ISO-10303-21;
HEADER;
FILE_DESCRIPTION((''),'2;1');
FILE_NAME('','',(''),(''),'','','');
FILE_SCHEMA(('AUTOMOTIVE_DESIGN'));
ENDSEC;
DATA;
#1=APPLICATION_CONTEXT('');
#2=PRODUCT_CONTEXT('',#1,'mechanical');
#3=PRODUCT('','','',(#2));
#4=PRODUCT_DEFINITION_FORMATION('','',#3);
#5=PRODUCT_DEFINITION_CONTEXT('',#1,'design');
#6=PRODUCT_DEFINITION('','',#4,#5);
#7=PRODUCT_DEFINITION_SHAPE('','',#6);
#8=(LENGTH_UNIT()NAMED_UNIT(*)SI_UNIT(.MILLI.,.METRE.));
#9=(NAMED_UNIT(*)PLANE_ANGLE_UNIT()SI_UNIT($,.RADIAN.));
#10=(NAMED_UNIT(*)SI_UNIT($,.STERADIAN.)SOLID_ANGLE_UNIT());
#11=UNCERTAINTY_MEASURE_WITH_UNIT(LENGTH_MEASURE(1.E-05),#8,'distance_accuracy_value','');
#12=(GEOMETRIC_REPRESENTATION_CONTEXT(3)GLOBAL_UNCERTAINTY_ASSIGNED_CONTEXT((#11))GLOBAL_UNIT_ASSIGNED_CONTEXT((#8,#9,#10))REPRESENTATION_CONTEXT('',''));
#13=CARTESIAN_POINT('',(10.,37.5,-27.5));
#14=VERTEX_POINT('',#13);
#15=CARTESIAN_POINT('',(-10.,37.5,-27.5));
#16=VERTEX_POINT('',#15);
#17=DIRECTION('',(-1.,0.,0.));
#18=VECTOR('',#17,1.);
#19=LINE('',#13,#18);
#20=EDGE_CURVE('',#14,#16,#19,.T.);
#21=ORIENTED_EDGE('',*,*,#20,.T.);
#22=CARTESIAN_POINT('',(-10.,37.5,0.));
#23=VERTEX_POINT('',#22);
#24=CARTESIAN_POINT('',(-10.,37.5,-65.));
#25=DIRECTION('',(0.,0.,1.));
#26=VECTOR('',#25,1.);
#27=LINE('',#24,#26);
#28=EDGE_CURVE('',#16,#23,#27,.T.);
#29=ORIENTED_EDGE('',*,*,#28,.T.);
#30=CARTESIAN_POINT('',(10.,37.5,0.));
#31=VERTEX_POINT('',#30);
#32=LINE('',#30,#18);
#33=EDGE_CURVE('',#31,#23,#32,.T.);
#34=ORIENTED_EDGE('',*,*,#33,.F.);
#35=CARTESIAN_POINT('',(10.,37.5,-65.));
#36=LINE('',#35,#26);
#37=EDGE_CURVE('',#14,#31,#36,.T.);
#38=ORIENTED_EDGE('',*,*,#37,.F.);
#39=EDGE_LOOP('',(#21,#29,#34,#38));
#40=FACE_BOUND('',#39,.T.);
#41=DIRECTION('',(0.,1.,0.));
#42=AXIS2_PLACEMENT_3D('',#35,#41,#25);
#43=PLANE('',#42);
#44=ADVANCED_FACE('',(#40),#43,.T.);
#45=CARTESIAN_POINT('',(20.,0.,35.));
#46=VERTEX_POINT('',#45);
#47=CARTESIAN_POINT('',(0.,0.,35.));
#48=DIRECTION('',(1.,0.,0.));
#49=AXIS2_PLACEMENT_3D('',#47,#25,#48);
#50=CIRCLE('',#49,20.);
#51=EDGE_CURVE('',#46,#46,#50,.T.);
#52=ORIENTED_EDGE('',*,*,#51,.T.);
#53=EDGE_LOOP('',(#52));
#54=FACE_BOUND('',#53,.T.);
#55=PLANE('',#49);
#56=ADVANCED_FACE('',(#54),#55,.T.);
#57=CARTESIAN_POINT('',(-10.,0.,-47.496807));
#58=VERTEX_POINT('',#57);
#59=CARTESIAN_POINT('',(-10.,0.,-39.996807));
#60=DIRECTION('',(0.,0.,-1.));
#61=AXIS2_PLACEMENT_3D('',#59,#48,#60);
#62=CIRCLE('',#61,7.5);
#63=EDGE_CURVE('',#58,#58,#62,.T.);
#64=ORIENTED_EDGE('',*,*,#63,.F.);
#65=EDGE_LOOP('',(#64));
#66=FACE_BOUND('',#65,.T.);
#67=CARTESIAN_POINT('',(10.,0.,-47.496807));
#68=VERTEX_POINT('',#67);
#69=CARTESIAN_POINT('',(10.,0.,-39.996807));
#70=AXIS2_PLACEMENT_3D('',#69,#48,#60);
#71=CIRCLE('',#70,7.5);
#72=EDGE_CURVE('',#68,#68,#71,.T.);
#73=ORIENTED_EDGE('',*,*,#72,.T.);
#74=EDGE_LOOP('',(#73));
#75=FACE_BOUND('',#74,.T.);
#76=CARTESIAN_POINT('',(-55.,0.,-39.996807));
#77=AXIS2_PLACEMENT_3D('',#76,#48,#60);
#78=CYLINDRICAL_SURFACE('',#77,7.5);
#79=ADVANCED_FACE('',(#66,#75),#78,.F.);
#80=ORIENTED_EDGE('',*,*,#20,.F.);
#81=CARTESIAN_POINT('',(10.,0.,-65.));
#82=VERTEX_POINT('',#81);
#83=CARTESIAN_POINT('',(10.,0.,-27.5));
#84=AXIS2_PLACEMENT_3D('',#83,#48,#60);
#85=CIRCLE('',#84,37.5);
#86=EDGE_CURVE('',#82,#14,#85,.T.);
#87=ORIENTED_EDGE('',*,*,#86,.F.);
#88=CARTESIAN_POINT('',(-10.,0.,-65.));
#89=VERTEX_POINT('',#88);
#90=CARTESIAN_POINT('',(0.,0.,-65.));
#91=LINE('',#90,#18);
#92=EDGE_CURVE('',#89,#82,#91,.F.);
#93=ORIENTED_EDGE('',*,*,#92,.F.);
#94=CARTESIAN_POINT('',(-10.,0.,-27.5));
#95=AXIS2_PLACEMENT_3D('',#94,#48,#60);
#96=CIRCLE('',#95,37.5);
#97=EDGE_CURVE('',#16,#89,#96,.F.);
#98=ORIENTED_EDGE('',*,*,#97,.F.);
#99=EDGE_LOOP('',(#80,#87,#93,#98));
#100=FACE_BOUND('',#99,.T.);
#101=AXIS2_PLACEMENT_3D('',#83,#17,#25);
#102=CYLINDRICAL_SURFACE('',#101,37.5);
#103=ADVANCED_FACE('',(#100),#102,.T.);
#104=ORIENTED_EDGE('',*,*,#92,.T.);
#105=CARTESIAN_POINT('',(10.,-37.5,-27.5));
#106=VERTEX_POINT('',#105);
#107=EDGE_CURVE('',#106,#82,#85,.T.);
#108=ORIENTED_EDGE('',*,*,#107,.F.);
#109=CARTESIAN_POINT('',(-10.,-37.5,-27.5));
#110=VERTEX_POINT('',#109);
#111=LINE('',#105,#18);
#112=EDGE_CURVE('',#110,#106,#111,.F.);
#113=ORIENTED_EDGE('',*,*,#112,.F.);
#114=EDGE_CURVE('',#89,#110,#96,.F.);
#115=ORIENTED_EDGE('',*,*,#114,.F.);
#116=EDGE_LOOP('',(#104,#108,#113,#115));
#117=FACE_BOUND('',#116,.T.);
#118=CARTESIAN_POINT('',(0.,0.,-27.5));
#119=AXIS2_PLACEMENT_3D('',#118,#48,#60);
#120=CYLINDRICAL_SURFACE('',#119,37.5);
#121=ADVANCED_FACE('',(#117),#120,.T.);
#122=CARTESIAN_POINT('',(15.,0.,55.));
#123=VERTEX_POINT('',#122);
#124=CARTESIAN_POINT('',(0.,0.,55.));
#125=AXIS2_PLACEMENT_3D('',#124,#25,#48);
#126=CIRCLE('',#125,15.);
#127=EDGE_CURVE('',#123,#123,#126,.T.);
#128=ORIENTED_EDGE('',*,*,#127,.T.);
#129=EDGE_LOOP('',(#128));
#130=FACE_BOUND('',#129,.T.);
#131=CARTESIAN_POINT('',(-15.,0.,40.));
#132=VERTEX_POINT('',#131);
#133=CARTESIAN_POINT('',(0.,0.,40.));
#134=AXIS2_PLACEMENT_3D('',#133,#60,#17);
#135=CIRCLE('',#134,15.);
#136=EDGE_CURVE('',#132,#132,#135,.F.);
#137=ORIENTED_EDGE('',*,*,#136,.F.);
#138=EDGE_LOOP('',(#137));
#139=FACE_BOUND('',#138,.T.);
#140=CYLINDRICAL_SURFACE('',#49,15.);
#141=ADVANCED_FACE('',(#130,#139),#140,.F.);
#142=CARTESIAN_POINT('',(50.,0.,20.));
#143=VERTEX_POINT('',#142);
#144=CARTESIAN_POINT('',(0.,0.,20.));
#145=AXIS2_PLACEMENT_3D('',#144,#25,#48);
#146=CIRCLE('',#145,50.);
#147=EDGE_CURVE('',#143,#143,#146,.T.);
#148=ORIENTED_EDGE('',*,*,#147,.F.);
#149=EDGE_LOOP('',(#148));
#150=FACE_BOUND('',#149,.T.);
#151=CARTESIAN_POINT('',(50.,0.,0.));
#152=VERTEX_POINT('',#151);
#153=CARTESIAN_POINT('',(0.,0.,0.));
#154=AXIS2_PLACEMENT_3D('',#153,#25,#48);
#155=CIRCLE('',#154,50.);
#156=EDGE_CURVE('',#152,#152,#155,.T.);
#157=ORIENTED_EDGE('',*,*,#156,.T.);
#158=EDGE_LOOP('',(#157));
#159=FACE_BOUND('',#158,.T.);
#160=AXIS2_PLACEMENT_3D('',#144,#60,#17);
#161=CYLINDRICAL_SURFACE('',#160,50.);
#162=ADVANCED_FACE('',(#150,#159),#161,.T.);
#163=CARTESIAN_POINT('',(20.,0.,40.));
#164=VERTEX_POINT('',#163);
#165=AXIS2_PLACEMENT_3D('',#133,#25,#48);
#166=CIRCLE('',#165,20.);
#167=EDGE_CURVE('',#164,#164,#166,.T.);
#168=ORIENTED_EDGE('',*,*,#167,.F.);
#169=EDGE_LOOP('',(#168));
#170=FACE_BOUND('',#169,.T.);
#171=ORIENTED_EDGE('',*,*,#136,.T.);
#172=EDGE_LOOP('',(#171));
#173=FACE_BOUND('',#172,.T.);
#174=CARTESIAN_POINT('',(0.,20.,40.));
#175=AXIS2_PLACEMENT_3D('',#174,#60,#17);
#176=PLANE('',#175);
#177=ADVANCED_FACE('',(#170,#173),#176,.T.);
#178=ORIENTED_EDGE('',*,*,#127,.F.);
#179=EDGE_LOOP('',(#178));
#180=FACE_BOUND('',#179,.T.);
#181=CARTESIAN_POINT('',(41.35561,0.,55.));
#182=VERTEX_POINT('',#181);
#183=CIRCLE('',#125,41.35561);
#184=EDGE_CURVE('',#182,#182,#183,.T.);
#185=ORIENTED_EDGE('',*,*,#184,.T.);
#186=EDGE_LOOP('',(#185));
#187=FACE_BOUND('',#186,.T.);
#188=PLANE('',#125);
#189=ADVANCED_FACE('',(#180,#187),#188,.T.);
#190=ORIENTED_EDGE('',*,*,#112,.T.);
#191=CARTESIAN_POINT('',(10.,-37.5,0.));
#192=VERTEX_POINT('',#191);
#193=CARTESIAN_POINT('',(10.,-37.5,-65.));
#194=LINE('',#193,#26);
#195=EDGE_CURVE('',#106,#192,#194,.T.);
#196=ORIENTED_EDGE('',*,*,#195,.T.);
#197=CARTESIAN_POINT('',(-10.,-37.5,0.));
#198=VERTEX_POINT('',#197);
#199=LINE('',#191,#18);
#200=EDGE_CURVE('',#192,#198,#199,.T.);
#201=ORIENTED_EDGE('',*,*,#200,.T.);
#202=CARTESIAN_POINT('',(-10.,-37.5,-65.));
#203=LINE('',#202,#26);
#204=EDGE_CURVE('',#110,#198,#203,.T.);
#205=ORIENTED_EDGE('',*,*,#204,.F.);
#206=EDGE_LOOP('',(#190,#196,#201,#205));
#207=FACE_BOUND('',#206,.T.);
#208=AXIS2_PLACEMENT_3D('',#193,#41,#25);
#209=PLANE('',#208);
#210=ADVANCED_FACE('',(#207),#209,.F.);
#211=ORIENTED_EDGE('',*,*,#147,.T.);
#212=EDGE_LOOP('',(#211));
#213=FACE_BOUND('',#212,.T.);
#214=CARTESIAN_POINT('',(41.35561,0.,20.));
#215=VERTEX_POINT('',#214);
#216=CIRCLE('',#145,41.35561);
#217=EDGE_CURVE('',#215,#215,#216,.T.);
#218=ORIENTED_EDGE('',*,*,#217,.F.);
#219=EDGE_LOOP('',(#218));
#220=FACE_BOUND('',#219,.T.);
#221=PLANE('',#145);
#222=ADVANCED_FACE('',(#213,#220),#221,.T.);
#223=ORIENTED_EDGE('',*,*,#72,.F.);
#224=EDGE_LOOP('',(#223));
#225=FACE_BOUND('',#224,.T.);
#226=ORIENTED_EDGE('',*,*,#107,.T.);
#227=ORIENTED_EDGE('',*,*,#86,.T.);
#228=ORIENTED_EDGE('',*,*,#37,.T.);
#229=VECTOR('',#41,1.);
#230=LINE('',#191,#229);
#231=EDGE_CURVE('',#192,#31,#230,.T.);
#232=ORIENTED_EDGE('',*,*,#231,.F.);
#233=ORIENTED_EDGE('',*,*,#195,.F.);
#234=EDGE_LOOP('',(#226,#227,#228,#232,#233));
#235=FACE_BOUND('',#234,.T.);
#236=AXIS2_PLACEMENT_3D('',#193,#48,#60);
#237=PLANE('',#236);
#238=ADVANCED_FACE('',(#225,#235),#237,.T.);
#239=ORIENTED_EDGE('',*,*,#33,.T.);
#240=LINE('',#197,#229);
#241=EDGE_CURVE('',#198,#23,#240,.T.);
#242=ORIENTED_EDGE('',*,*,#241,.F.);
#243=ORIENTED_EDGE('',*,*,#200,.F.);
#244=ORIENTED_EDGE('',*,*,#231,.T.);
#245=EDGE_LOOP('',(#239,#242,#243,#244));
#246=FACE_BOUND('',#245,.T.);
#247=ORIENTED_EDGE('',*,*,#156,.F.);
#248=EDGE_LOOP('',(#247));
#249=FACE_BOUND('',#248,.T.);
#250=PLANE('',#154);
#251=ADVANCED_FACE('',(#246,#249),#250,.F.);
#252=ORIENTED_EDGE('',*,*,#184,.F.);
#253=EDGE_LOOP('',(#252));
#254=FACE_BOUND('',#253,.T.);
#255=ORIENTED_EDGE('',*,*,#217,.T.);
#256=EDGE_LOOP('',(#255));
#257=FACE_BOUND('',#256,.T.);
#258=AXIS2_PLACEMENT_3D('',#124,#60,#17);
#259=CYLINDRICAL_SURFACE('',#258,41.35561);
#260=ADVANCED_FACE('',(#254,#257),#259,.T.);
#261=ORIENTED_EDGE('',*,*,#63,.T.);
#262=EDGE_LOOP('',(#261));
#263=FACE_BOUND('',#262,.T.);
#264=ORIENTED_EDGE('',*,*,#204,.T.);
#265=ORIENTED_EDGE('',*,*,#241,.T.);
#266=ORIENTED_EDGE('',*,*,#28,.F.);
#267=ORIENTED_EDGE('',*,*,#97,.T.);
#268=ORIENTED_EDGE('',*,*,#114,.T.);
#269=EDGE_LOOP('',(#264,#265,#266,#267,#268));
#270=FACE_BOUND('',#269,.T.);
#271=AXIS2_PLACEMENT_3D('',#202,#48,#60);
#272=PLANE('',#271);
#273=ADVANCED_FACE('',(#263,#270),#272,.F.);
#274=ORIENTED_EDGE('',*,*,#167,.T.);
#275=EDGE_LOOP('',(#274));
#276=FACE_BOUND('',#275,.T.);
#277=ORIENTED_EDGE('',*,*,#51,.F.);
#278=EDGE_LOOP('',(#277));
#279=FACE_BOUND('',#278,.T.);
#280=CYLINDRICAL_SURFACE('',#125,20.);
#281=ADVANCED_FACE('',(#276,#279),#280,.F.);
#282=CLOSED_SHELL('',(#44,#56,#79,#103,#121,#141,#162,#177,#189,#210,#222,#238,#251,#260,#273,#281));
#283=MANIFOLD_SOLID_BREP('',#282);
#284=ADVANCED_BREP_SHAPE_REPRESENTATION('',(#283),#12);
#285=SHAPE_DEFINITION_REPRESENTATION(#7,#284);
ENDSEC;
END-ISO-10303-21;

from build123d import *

# Parameters (mm, degrees)
SKETCH1_R           = 50
BOSS_EXTRUDE1_DEPTH = 20
SKETCH2_W           = 20
SKETCH2_H           = 75
BOSS_EXTRUDE2_DEPTH = 65
SKETCH3_R           = 7.5
CUT_EXTRUDE1_DEPTH  = 65
FILLET1_R           = 37.5
SKETCH4_R           = 41.355609665
BOSS_EXTRUDE3_DEPTH = 35
SKETCH8_R           = 15
CUT_EXTRUDE2_DEPTH  = 20
SKETCH10_W          = 5
SKETCH10_H          = 8.446283525


with BuildPart() as part:
    # Sketch1 → Boss-Extrude1 (new body)
    with BuildSketch(Plane.XY):
        Circle(SKETCH1_R)
    extrude(amount=BOSS_EXTRUDE1_DEPTH)

    # Sketch2 → Boss-Extrude2 (add)
    with BuildSketch(Plane(origin=(0, 0, 0), x_dir=(-1, 0, 0), z_dir=(0, 0, -1))):
        Rectangle(SKETCH2_W, SKETCH2_H)
    extrude(amount=BOSS_EXTRUDE2_DEPTH)

    # Sketch3 → Cut-Extrude1 (cut)
    with BuildSketch(Plane(origin=(10, 0, 0), x_dir=(0, 0, -1), z_dir=(1, 0, 0))):
        with Locations((39.996807152, 0)):
            Circle(SKETCH3_R)
    extrude(amount=-CUT_EXTRUDE1_DEPTH, mode=Mode.SUBTRACT)

    # Fillet1
    fillet1_edges = [part.edges().sort_by_distance(p)[0] for p in [
        (0, -37.5, -65),
        (0, 37.5, -65),
    ]]
    fillet(fillet1_edges, radius=FILLET1_R - 0.0001)  # a hair under: the kernel refuses the full size

    # Sketch4 → Boss-Extrude3 (add)
    with BuildSketch(Plane.XY.offset(20)):
        Circle(SKETCH4_R)
    extrude(amount=BOSS_EXTRUDE3_DEPTH)

    # Sketch8 → Cut-Extrude2 (cut)
    with BuildSketch(Plane.XY.offset(55)):
        Circle(SKETCH8_R)
    extrude(amount=-CUT_EXTRUDE2_DEPTH, mode=Mode.SUBTRACT)

    # Sketch10 → Cut-Revolve1 (revolve, cut)
    with BuildSketch(Plane(origin=(0, 0, 0), x_dir=(0, 0, -1), z_dir=(1, 0, 0)), mode=Mode.PRIVATE) as cut_revolve1_sk:
        with Locations((-37.5, 15.776858238)):
            Rectangle(SKETCH10_W, SKETCH10_H)
    revolve(cut_revolve1_sk.sketch.rotate(Axis((0, 0, 55), (0, 0, -1)), 90), axis=Axis((0, 0, 55), (0, 0, -1)), mode=Mode.SUBTRACT)


solid = part.part
